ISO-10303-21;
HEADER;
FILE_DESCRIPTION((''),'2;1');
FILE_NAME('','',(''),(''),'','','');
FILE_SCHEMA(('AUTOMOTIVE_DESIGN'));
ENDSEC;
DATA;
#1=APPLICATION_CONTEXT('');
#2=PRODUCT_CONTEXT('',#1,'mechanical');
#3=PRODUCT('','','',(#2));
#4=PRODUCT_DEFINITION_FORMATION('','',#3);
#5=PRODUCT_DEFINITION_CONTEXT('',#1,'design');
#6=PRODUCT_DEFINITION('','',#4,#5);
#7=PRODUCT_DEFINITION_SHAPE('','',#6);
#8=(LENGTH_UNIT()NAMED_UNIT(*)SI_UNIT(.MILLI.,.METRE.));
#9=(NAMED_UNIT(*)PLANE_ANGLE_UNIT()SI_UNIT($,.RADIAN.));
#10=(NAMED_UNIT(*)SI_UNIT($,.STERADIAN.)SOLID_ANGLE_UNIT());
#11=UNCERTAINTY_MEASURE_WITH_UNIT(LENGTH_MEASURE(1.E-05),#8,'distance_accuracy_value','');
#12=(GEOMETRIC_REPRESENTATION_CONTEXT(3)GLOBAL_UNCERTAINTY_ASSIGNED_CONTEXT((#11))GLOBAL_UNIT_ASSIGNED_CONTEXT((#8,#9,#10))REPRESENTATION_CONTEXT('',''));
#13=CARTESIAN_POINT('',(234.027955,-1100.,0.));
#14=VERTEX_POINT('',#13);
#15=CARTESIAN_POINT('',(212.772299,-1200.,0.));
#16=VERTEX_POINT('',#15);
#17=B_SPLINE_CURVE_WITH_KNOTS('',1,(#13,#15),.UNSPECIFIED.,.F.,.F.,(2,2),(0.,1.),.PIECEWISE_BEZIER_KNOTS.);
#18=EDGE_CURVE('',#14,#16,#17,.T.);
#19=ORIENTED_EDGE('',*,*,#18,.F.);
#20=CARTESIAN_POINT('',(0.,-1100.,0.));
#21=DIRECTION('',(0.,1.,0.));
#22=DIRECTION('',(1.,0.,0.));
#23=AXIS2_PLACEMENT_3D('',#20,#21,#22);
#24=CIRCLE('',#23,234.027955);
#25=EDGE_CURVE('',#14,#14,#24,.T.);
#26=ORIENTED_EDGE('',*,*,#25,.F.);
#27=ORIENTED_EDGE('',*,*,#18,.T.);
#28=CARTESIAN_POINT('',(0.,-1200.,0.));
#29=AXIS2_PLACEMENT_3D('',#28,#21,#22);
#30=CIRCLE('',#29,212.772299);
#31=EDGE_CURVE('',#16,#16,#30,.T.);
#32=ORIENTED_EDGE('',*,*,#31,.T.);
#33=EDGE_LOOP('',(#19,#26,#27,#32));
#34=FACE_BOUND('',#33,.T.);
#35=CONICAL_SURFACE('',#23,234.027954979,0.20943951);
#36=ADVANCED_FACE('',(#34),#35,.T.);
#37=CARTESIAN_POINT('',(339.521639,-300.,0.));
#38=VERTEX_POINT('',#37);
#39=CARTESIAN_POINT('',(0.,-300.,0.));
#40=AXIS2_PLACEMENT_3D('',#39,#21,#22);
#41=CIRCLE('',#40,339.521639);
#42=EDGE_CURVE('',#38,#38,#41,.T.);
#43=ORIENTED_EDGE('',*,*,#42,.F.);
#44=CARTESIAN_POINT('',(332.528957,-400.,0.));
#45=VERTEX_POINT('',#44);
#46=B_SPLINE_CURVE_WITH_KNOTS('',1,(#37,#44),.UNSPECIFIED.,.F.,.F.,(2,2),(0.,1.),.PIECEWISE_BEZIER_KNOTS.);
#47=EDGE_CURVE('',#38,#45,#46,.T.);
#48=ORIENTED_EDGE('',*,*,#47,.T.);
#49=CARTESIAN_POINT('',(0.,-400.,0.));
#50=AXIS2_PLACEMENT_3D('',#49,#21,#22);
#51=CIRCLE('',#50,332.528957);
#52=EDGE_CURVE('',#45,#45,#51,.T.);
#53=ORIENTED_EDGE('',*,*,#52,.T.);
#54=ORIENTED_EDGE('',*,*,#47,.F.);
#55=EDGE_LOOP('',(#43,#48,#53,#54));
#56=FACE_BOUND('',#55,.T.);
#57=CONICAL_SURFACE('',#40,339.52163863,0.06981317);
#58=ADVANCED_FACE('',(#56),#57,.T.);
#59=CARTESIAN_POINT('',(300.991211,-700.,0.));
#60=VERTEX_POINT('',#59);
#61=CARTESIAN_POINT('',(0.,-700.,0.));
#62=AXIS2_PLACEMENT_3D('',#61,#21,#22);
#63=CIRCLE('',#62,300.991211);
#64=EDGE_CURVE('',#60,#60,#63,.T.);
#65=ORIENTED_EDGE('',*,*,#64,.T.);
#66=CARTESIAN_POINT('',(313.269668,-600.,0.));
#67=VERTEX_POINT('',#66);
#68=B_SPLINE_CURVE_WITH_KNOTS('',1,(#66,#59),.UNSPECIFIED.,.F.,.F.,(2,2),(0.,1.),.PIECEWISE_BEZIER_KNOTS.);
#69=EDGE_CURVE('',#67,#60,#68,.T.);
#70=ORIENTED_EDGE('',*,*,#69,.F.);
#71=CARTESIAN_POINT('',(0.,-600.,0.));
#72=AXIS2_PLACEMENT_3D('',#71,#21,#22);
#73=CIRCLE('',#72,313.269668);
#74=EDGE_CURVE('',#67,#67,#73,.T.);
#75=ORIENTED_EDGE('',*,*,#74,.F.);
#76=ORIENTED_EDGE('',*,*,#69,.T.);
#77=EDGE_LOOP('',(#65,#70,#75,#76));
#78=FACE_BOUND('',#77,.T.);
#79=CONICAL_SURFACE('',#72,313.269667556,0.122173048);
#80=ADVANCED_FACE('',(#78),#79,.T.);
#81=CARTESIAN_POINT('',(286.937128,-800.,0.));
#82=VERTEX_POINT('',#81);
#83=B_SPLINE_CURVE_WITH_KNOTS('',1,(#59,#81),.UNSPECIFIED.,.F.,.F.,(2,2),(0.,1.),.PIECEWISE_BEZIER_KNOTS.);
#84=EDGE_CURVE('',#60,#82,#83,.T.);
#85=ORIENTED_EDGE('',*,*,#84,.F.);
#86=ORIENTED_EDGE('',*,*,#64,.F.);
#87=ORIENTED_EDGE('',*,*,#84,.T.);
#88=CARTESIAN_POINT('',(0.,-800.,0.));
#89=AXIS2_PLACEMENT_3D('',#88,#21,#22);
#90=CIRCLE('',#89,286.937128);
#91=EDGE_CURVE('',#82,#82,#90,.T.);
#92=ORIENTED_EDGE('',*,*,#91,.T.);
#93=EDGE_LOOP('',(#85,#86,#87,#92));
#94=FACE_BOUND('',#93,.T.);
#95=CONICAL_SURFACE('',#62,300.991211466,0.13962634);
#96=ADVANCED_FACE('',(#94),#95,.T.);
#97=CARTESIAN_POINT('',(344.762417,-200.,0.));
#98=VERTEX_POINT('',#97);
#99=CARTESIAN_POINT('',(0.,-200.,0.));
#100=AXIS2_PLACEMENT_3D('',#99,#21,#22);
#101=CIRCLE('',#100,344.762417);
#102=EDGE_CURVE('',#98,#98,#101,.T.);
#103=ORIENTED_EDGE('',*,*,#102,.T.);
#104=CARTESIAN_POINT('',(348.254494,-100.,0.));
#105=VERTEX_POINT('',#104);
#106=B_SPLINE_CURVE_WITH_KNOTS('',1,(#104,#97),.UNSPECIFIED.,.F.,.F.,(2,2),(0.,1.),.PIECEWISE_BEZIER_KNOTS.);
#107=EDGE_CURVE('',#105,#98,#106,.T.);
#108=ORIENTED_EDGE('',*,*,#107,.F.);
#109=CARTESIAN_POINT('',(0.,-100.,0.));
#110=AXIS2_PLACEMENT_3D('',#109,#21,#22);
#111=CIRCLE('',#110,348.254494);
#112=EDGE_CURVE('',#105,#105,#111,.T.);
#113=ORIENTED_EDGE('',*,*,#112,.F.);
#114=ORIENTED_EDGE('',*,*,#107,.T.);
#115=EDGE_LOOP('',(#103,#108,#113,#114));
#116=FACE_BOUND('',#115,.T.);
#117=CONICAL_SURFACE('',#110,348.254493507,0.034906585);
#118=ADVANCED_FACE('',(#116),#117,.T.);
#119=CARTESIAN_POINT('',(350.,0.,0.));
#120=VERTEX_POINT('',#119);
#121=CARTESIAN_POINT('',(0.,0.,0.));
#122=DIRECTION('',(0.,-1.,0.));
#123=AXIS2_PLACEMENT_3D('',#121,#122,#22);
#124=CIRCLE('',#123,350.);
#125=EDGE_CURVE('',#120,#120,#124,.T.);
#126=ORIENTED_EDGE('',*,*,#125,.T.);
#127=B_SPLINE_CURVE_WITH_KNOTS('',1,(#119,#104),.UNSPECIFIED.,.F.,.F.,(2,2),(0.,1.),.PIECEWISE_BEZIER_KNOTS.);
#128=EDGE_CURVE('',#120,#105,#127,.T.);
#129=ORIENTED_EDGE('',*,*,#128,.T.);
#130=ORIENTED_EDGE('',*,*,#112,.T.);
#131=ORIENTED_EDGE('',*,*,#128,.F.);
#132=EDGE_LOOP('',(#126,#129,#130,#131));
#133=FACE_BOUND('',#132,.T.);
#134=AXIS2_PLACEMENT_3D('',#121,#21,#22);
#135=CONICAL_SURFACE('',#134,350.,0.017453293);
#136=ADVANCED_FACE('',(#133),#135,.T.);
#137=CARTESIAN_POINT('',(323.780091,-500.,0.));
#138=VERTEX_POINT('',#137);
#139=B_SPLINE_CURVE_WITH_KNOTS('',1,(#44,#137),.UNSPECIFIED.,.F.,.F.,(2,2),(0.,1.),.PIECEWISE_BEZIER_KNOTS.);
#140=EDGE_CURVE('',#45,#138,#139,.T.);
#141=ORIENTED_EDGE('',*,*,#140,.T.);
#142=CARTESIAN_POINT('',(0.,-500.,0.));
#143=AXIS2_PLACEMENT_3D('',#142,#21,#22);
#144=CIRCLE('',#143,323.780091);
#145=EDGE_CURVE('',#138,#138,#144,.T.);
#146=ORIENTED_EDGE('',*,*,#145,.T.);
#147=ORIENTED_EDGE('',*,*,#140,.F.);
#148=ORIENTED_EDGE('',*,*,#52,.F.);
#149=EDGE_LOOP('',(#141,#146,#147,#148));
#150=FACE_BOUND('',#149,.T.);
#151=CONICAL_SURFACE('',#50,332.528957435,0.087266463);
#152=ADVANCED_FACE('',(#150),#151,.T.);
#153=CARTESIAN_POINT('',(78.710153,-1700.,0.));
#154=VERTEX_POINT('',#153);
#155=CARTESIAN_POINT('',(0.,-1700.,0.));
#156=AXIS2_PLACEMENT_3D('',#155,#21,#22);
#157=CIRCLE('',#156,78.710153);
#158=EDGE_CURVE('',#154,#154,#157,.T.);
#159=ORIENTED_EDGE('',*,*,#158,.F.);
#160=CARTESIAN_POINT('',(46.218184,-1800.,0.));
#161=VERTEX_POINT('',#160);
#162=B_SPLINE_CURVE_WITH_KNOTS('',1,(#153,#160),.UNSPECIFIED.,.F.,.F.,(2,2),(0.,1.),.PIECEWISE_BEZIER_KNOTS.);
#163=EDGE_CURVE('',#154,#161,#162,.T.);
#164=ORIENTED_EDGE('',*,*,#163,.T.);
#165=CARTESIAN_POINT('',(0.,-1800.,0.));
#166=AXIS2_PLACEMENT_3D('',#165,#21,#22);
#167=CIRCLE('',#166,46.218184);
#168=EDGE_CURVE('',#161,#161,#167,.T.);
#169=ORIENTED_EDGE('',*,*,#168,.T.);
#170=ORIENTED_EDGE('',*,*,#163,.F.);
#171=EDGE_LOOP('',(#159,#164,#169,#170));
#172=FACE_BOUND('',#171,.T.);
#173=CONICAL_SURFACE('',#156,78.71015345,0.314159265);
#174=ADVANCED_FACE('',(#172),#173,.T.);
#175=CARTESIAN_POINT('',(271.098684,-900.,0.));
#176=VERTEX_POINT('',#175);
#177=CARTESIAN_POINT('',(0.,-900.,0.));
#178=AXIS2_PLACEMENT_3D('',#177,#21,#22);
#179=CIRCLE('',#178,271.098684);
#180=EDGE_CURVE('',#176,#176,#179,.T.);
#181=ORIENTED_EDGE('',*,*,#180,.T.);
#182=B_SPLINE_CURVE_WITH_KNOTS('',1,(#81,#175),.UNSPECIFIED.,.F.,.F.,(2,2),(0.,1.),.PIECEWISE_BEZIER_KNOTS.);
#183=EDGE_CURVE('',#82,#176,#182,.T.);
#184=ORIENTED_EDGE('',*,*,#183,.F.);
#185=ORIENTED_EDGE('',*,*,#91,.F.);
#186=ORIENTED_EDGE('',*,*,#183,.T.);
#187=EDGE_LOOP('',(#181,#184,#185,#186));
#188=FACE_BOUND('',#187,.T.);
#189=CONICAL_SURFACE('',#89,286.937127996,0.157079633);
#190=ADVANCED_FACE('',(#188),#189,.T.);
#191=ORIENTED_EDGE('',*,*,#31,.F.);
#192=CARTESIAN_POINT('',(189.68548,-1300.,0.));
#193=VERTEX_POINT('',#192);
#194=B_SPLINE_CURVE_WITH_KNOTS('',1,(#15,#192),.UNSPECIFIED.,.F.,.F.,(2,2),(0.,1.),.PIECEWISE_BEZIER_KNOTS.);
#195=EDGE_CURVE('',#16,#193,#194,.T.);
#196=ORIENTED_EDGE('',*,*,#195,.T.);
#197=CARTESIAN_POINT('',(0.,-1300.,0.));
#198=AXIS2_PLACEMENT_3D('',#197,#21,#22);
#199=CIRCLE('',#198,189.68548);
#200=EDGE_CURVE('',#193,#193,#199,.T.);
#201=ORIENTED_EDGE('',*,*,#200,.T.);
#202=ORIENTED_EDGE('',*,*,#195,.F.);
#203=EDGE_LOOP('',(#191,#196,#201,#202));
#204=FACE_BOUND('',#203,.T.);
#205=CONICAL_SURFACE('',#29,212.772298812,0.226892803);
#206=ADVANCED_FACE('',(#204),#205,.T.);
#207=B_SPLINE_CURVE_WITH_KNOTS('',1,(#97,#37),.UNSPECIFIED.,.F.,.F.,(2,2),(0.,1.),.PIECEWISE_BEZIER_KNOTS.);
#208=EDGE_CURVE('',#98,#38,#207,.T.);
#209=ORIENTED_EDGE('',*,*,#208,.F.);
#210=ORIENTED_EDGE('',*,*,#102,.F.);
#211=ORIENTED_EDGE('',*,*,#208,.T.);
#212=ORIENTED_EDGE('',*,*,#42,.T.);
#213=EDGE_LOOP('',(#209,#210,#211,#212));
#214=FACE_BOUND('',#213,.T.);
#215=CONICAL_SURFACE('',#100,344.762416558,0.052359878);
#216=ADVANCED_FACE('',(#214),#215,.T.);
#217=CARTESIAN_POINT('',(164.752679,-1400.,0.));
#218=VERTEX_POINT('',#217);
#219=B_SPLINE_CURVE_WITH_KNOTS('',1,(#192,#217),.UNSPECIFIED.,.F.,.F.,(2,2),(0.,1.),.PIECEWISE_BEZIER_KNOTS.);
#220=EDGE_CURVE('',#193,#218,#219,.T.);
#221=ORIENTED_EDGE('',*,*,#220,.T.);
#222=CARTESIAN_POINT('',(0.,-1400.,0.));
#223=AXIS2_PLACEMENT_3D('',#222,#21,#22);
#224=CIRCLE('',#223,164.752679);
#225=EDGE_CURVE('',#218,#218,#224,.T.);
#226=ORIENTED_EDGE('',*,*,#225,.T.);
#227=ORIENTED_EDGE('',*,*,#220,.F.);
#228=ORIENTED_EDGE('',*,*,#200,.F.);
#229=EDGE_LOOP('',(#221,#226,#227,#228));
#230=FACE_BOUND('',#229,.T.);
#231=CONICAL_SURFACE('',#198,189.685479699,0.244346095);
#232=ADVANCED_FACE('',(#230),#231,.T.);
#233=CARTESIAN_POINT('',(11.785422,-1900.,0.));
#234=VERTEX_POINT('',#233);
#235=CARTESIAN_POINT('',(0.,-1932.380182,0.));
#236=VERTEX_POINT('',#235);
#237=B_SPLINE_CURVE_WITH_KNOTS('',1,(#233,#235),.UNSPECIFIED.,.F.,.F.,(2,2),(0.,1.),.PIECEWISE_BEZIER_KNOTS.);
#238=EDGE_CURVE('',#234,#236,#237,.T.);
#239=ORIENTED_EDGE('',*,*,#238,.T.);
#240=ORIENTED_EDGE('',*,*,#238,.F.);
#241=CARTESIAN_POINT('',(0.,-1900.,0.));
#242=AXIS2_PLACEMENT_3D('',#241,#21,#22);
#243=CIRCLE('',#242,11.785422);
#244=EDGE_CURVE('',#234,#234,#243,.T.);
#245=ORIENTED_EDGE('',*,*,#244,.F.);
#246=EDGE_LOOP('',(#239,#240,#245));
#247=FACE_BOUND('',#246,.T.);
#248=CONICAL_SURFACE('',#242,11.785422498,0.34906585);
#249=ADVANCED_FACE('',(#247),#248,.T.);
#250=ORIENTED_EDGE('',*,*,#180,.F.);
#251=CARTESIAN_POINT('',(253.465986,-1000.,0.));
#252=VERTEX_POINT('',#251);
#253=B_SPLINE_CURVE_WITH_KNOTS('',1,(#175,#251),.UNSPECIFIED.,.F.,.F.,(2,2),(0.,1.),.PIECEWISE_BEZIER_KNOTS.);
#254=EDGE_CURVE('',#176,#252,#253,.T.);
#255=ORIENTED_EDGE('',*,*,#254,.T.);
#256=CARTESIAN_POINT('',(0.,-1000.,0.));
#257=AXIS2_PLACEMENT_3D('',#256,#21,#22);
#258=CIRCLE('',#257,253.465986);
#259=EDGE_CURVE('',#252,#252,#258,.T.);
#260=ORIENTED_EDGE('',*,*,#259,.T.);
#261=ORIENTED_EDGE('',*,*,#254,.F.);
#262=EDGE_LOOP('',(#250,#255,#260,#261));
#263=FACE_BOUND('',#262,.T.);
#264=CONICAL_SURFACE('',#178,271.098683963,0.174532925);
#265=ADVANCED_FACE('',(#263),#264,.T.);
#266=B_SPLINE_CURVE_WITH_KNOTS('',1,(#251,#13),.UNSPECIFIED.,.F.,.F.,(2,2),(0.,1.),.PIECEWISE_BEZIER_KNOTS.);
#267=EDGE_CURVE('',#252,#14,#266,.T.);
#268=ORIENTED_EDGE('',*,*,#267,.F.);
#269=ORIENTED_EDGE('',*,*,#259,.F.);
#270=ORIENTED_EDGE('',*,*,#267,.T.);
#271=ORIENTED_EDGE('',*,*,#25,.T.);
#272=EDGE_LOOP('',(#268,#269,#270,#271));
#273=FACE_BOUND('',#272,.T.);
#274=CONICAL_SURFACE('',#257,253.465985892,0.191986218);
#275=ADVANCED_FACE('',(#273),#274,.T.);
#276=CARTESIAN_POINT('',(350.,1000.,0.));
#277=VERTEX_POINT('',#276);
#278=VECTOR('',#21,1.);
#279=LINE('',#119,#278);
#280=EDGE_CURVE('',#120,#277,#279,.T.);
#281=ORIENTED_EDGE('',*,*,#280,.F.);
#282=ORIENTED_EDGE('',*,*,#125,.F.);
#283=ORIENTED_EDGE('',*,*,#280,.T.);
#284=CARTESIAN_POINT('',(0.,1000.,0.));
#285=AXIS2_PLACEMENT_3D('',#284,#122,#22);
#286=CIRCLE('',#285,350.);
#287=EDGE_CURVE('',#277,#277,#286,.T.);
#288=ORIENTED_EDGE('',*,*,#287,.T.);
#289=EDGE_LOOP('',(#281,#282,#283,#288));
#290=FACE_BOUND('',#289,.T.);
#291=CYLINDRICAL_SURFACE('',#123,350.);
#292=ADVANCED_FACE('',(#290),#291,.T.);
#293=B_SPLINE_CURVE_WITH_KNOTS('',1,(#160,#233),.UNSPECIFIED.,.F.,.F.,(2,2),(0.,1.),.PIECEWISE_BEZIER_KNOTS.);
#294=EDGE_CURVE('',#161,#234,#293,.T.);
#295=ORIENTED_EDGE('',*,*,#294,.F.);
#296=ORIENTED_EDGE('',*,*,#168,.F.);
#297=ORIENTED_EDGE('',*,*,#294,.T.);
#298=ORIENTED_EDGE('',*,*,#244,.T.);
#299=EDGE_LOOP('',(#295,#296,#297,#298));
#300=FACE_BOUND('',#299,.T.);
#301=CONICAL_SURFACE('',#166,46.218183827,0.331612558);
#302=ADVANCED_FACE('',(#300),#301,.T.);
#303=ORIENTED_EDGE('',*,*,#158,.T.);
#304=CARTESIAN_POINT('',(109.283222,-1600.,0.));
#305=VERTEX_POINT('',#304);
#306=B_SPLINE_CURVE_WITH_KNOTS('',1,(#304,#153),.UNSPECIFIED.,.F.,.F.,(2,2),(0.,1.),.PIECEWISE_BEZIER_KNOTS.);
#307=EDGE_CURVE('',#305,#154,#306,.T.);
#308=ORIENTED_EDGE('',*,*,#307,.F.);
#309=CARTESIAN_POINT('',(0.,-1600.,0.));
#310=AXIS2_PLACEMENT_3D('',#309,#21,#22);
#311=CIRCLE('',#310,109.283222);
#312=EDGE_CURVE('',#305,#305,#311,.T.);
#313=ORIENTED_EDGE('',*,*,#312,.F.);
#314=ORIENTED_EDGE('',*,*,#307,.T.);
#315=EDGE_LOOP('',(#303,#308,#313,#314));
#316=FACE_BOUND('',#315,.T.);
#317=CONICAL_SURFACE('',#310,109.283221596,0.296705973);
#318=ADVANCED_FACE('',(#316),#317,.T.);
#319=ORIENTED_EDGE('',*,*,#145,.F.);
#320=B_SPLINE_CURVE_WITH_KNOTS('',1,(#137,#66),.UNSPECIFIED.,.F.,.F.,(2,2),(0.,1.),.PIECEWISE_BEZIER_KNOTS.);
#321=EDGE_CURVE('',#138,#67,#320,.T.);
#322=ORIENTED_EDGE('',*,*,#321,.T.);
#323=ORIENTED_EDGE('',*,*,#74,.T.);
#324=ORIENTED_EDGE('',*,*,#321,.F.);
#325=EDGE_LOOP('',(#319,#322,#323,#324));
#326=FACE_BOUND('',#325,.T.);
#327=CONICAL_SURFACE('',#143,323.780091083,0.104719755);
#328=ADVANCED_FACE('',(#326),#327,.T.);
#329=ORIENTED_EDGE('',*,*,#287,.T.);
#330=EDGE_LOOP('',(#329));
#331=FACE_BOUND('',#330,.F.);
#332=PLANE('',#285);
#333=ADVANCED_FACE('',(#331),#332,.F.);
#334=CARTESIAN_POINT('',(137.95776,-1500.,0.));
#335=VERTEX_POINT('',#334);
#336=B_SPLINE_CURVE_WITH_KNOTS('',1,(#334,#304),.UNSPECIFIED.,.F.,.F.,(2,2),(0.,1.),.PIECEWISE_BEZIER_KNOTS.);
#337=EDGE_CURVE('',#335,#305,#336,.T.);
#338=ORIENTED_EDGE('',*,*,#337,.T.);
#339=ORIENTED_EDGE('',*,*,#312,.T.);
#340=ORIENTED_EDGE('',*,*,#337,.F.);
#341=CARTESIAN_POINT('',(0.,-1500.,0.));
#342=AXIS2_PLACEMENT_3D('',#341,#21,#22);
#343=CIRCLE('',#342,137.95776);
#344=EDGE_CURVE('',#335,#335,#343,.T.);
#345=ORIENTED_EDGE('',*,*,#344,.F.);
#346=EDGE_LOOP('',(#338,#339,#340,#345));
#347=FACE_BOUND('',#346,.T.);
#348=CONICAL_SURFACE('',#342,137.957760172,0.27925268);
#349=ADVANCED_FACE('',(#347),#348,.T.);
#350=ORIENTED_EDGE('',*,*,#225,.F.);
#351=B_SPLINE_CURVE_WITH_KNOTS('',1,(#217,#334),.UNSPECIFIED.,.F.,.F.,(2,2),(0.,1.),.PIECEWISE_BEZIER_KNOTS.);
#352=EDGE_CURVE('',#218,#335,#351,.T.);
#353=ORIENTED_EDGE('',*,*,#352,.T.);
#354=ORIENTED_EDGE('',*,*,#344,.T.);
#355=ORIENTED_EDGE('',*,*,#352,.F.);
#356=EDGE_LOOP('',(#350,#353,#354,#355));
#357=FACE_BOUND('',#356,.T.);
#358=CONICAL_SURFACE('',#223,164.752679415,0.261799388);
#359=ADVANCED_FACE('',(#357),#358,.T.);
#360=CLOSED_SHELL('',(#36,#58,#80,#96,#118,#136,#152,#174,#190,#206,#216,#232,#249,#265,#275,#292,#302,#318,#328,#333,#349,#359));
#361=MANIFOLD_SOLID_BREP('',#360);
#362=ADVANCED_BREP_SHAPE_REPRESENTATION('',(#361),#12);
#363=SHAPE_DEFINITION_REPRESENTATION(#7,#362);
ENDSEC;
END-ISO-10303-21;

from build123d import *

# Parameters (mm, degrees)
F0_R       = 350
F1_DEPTH   = 100
F1_TAPER   = 1
F1_FACE_R  = 348.2544935072
F2_DEPTH   = 100
F2_TAPER   = 2
F2_FACE_R  = 344.762416558
F3_DEPTH   = 100
F3_TAPER   = 3
F3_FACE_R  = 339.5216386297
F4_DEPTH   = 100
F4_TAPER   = 4
F4_FACE_R  = 332.5289574353
F5_DEPTH   = 100
F5_TAPER   = 5
F5_FACE_R  = 323.7800910828
F6_DEPTH   = 100
F6_TAPER   = 6
F6_FACE_R  = 313.2696675562
F7_DEPTH   = 100
F7_TAPER   = 7
F7_FACE_R  = 300.9912114659
F8_DEPTH   = 100
F8_TAPER   = 8
F8_FACE_R  = 286.9371279957
F9_DEPTH   = 100
F9_TAPER   = 9
F9_FACE_R  = 271.0986839632
F10_DEPTH  = 100
F10_TAPER  = 10
F10_FACE_R = 253.4659858924
F11_DEPTH  = 100
F11_TAPER  = 11
F11_FACE_R = 234.0279549786
F12_DEPTH  = 100
F12_TAPER  = 12
F12_FACE_R = 212.7722988116
F13_DEPTH  = 100
F13_TAPER  = 13
F13_FACE_R = 189.685479699
F14_DEPTH  = 100
F14_TAPER  = 14
F14_FACE_R = 164.7526794147
F15_DEPTH  = 100
F15_TAPER  = 15
F15_FACE_R = 137.9577601716
F16_DEPTH  = 100
F16_TAPER  = 16
F16_FACE_R = 109.2832215957
F17_DEPTH  = 100
F17_TAPER  = 17
F17_FACE_R = 78.7101534499
F18_DEPTH  = 100
F18_TAPER  = 18
F18_FACE_R = 46.2181838266
F19_DEPTH  = 100
F19_TAPER  = 19
F19_FACE_R = 11.7854224976
F21_DEPTH  = 1000


# Not quite as in the source:
# - an extrude whose draft closes it to a point is written as a loft to that point


with BuildPart() as f1:
    # F0 (on Front) → F1 (new body)
    with BuildSketch(Plane.XZ):
        Circle(F0_R)
    extrude(amount=F1_DEPTH, taper=F1_TAPER)

    # F1_face (on face) → F2 (join)
    with BuildSketch(Plane.XZ.offset(100)):
        Circle(F1_FACE_R)
    extrude(amount=F2_DEPTH, taper=F2_TAPER)

    # F2_face (on face) → F3 (join)
    with BuildSketch(Plane.XZ.offset(200)):
        Circle(F2_FACE_R)
    extrude(amount=F3_DEPTH, taper=F3_TAPER)

    # F3_face (on face) → F4 (join)
    with BuildSketch(Plane.XZ.offset(300)):
        Circle(F3_FACE_R)
    extrude(amount=F4_DEPTH, taper=F4_TAPER)

    # F4_face (on face) → F5 (join)
    with BuildSketch(Plane.XZ.offset(400)):
        Circle(F4_FACE_R)
    extrude(amount=F5_DEPTH, taper=F5_TAPER)

    # F5_face (on face) → F6 (join)
    with BuildSketch(Plane.XZ.offset(500)):
        Circle(F5_FACE_R)
    extrude(amount=F6_DEPTH, taper=F6_TAPER)

    # F6_face (on face) → F7 (join)
    with BuildSketch(Plane.XZ.offset(600)):
        Circle(F6_FACE_R)
    extrude(amount=F7_DEPTH, taper=F7_TAPER)

    # F7_face (on face) → F8 (join)
    with BuildSketch(Plane.XZ.offset(700)):
        Circle(F7_FACE_R)
    extrude(amount=F8_DEPTH, taper=F8_TAPER)

    # F8_face (on face) → F9 (join)
    with BuildSketch(Plane.XZ.offset(800)):
        Circle(F8_FACE_R)
    extrude(amount=F9_DEPTH, taper=F9_TAPER)

    # F9_face (on face) → F10 (join)
    with BuildSketch(Plane.XZ.offset(900)):
        Circle(F9_FACE_R)
    extrude(amount=F10_DEPTH, taper=F10_TAPER)

    # F10_face (on face) → F11 (join)
    with BuildSketch(Plane.XZ.offset(1000)):
        Circle(F10_FACE_R)
    extrude(amount=F11_DEPTH, taper=F11_TAPER)

    # F11_face (on face) → F12 (join)
    with BuildSketch(Plane.XZ.offset(1100)):
        Circle(F11_FACE_R)
    extrude(amount=F12_DEPTH, taper=F12_TAPER)

    # F12_face (on face) → F13 (join)
    with BuildSketch(Plane.XZ.offset(1200)):
        Circle(F12_FACE_R)
    extrude(amount=F13_DEPTH, taper=F13_TAPER)

    # F13_face (on face) → F14 (join)
    with BuildSketch(Plane.XZ.offset(1300)):
        Circle(F13_FACE_R)
    extrude(amount=F14_DEPTH, taper=F14_TAPER)

    # F14_face (on face) → F15 (join)
    with BuildSketch(Plane.XZ.offset(1400)):
        Circle(F14_FACE_R)
    extrude(amount=F15_DEPTH, taper=F15_TAPER)

    # F15_face (on face) → F16 (join)
    with BuildSketch(Plane.XZ.offset(1500)):
        Circle(F15_FACE_R)
    extrude(amount=F16_DEPTH, taper=F16_TAPER)

    # F16_face (on face) → F17 (join)
    with BuildSketch(Plane.XZ.offset(1600)):
        Circle(F16_FACE_R)
    extrude(amount=F17_DEPTH, taper=F17_TAPER)

    # F17_face (on face) → F18 (join)
    with BuildSketch(Plane.XZ.offset(1700)):
        Circle(F17_FACE_R)
    extrude(amount=F18_DEPTH, taper=F18_TAPER)

    # F18_face (on face) → F19 (join)
    with BuildSketch(Plane.XZ.offset(1800)):
        Circle(F18_FACE_R)
    extrude(amount=F19_DEPTH, taper=F19_TAPER)

    # F19_face (on face) → F20 section 0
    with BuildSketch(Plane.XZ.offset(1900), mode=Mode.PRIVATE) as f20_s0:
        Circle(F19_FACE_R)
    loft([f20_s0.sketch, Vertex(0, -1932.3801821909, 0)], ruled=True)

    # F21 (add): a face of the model
    f21_faces = [f1.faces().sort_by_distance(p)[0] for p in [
        (0, 0, 0),
    ]]
    extrude(f21_faces, amount=F21_DEPTH)


solid = f1.part
